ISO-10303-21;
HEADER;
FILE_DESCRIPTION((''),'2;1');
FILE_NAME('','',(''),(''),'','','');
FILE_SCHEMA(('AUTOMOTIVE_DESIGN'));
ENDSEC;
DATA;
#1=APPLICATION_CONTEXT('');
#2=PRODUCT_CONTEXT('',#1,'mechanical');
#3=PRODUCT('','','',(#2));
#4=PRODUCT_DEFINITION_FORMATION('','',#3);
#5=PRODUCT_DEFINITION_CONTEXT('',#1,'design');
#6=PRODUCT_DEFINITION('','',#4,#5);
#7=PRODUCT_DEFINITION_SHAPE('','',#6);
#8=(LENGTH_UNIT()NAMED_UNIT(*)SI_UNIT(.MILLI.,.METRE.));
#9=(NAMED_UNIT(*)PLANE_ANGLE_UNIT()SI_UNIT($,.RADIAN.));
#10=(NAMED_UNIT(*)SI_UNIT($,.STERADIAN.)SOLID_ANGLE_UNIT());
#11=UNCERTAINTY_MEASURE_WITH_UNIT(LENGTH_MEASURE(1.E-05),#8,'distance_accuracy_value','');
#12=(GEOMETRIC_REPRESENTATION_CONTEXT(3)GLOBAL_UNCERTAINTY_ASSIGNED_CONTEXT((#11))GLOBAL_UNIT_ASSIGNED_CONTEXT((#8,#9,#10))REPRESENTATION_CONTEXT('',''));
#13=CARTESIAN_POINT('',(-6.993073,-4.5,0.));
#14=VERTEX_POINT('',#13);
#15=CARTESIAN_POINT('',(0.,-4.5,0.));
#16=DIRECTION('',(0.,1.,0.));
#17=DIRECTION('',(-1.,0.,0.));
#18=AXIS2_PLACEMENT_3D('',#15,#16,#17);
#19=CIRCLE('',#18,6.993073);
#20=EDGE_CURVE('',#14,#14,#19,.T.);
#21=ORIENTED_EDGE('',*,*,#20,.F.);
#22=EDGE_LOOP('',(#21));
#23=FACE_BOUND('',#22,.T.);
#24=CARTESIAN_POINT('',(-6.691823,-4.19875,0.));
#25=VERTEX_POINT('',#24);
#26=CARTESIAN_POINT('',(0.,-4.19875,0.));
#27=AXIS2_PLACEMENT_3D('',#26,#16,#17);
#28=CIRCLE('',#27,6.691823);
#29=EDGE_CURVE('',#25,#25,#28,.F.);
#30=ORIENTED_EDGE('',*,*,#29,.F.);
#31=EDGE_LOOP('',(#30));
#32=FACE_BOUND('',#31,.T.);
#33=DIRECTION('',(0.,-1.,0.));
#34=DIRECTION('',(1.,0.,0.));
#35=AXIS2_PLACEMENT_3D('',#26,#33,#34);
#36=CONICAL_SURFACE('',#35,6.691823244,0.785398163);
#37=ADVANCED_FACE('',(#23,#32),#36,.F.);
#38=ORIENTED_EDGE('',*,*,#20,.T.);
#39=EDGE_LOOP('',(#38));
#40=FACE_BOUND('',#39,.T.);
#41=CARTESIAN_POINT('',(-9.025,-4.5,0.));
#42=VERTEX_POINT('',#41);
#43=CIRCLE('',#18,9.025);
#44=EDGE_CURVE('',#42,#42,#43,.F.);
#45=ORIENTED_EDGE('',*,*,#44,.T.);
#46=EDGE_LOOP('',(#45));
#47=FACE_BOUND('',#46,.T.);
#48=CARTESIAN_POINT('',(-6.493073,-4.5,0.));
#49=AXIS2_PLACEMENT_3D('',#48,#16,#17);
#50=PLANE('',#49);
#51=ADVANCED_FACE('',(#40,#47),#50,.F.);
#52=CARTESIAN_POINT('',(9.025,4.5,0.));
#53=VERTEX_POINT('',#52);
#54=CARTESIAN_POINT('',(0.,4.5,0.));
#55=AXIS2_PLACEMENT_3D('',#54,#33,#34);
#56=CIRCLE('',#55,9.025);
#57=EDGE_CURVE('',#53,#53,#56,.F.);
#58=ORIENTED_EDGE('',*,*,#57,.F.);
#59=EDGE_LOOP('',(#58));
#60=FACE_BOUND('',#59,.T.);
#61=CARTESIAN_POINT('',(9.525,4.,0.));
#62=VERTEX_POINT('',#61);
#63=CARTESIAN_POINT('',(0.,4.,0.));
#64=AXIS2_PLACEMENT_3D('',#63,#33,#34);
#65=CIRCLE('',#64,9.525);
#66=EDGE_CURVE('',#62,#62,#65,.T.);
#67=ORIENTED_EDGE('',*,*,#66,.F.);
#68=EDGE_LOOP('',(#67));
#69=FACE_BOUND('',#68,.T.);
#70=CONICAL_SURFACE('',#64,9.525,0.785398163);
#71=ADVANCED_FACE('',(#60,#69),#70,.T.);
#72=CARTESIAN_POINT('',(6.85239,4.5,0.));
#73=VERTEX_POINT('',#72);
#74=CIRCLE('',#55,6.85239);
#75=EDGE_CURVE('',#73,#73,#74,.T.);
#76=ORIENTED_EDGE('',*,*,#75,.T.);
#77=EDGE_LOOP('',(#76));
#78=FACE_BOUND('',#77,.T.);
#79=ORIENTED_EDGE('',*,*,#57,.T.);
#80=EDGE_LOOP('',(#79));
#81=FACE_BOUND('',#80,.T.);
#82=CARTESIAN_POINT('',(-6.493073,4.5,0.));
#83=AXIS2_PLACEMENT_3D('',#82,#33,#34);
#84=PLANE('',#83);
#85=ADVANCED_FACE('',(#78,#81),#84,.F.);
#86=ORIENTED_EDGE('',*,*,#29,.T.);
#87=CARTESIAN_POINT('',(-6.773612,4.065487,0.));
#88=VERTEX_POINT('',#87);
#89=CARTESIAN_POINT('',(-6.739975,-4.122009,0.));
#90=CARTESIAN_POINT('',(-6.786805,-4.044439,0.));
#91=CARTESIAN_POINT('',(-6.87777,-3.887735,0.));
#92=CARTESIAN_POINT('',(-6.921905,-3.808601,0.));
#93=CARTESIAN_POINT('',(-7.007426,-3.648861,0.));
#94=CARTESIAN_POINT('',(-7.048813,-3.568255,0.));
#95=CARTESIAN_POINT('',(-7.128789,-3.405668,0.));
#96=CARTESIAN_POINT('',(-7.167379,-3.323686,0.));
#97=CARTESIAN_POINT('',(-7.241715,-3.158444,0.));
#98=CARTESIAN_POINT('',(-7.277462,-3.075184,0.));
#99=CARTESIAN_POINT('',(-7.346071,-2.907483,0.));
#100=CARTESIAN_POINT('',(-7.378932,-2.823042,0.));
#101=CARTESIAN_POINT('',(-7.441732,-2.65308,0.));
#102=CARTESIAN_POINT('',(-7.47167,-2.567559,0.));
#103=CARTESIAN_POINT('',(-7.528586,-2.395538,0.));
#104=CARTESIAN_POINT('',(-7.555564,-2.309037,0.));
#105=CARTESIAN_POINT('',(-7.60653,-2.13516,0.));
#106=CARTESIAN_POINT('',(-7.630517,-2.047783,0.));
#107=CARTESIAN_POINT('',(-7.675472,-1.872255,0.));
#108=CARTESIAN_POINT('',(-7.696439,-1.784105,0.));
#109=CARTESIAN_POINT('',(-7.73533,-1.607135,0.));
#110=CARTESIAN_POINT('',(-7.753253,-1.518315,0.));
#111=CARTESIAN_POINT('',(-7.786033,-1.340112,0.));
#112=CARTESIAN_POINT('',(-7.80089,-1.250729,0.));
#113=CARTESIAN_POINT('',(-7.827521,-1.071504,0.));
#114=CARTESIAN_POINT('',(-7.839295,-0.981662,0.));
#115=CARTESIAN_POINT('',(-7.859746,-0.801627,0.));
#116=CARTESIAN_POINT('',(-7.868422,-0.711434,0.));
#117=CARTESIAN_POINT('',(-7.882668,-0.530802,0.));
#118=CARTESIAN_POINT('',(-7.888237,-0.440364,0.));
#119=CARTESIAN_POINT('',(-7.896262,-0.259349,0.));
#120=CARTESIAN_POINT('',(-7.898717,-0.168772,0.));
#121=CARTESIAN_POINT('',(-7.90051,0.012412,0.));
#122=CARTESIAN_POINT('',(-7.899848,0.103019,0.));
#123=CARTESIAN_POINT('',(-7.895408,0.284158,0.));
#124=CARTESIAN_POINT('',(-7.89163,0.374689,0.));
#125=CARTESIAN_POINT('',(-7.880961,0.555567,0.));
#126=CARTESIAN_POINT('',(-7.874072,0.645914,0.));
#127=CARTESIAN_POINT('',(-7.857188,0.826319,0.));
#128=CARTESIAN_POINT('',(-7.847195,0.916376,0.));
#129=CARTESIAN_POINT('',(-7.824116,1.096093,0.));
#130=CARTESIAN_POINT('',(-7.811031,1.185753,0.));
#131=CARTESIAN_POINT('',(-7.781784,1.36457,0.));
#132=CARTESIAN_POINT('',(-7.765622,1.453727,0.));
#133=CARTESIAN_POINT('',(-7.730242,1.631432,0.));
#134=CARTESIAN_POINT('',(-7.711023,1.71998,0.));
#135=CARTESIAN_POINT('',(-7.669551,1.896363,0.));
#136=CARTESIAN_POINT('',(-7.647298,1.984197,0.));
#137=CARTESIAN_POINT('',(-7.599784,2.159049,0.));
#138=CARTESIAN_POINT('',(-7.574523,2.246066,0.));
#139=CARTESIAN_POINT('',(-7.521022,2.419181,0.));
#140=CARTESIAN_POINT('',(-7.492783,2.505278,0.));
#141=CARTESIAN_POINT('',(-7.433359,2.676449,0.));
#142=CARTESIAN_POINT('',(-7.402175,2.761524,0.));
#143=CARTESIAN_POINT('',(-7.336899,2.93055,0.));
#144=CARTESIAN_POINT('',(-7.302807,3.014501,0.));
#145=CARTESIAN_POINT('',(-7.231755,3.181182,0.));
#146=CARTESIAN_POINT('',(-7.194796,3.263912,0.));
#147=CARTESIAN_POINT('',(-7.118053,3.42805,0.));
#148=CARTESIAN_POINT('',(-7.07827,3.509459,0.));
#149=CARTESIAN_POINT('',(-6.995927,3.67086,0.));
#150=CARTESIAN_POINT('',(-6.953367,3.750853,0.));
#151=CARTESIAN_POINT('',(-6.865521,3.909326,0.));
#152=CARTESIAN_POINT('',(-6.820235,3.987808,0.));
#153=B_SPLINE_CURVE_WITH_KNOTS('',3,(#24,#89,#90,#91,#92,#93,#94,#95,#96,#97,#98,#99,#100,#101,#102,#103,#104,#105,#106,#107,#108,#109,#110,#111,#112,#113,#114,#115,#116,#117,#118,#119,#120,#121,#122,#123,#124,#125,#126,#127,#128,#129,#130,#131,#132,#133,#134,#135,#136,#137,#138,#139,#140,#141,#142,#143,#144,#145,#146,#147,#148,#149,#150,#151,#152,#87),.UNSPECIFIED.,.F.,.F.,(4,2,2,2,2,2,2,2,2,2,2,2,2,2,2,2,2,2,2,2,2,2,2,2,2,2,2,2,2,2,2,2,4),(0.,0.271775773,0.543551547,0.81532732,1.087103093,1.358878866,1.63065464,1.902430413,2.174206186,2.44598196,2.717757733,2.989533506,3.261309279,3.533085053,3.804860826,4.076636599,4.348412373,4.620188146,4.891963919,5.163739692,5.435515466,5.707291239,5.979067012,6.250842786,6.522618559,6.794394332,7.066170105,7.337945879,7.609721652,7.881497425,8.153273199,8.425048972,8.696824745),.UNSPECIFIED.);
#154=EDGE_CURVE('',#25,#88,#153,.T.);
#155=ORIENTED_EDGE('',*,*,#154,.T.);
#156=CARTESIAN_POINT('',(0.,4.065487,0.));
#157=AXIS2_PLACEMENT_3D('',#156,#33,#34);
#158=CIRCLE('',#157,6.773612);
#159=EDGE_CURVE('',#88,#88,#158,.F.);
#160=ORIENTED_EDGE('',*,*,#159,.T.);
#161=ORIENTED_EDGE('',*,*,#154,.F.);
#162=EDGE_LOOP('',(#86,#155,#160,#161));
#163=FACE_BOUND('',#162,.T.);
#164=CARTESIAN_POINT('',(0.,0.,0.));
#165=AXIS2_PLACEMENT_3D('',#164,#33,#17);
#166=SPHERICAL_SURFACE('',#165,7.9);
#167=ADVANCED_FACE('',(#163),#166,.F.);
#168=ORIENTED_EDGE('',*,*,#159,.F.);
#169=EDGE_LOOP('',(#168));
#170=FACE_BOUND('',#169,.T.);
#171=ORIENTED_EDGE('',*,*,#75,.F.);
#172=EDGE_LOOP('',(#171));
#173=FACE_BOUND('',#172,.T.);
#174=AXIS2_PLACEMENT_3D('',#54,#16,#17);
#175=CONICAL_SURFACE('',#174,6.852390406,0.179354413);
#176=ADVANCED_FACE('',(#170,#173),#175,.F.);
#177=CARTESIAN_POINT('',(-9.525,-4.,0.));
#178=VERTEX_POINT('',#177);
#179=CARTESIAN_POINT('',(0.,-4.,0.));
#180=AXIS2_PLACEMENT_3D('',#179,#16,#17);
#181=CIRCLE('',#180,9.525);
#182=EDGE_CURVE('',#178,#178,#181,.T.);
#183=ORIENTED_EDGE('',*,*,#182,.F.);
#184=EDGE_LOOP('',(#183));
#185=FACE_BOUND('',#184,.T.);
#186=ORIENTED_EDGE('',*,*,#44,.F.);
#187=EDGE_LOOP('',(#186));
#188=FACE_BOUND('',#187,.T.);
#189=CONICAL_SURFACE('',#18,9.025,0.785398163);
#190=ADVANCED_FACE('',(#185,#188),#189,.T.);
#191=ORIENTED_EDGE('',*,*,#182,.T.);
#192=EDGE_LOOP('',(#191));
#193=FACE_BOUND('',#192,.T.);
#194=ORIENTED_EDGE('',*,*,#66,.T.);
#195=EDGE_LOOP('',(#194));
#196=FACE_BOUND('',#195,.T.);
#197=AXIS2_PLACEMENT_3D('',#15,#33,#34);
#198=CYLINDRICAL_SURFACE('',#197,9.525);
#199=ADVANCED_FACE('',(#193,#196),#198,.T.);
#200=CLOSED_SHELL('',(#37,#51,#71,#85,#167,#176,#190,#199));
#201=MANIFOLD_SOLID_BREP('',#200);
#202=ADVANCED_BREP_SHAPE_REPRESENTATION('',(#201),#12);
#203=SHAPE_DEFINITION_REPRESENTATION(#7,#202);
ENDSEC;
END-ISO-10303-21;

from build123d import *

# Parameters (mm, degrees)
CHAMFER1_SIZE   = 0.359317173
CHAMFER1_SIZE_2 = 0.5


with BuildPart() as part:
    # Sketch2 → Revolve1 (revolve)
    with BuildSketch(Plane.XY):
        with BuildLine():
            Line((-9.525, -4.5), (-9.525, 4.5))
            Line((-9.525, 4.5), (-6.493073232, 4.5))
            ThreePointArc((-6.493073232, 4.5), (-7.9, 0), (-6.493073232, -4.5))
            Line((-6.493073232, -4.5), (-9.525, -4.5))
        make_face()
    revolve(axis=Axis((0, -4.5, 0), (0, 1, 0)))

    # Chamfer1
    # the kernel refuses this chamfer: 0.5, 0.359317173 mm, written as the material it takes off along each edge
    with BuildSketch(Plane(origin=(0, 4.5, 0), x_dir=(-1, 0, 0), z_dir=(0, 0, -1))) as chamfer1_piece_1:
        with BuildLine():
            Line((6.493073232 + CHAMFER1_SIZE, 0), (6.773611969, -0.434513449))
            ThreePointArc((6.773611969, -0.434513449), (6.640861095, -0.221102487), (6.493073232, 0))
            Line((6.493073232, 0), (6.493073232 + CHAMFER1_SIZE, 0))
        make_face()
    revolve(axis=Axis((0, 4.5, 0), (0, 1, 0)), mode=Mode.SUBTRACT)
    with BuildSketch(Plane(origin=(0, 4.5, 0), x_dir=(-1, 0, 0), z_dir=(0, 0, -1))) as chamfer1_piece_2:
        Polygon((9.525, -CHAMFER1_SIZE_2), (9.525 - CHAMFER1_SIZE_2, 0), (9.525, 0), align=None)
    revolve(axis=Axis((0, 4.5, 0), (0, 1, 0)), mode=Mode.SUBTRACT)
    with BuildSketch(Plane(origin=(0, -4.5, 0), x_dir=(-1, 0, 0), z_dir=(0, 0, -1))) as chamfer1_piece_3:
        Polygon((9.525 - CHAMFER1_SIZE_2, 0), (9.525, CHAMFER1_SIZE_2), (9.525, 0), align=None)
    revolve(axis=Axis((0, -4.5, 0), (0, 1, 0)), mode=Mode.SUBTRACT)
    with BuildSketch(Plane(origin=(0, -4.5, 0), x_dir=(-1, 0, 0), z_dir=(0, 0, -1))) as chamfer1_piece_4:
        with BuildLine():
            Line((6.493073232 + CHAMFER1_SIZE_2, 0), (6.691823244, 0.301249988))
            ThreePointArc((6.691823244, 0.301249988), (6.595276141, 0.151168821), (6.493073232, 0))
            Line((6.493073232, 0), (6.493073232 + CHAMFER1_SIZE_2, 0))
        make_face()
    revolve(axis=Axis((0, -4.5, 0), (0, 1, 0)), mode=Mode.SUBTRACT)


solid = part.part
